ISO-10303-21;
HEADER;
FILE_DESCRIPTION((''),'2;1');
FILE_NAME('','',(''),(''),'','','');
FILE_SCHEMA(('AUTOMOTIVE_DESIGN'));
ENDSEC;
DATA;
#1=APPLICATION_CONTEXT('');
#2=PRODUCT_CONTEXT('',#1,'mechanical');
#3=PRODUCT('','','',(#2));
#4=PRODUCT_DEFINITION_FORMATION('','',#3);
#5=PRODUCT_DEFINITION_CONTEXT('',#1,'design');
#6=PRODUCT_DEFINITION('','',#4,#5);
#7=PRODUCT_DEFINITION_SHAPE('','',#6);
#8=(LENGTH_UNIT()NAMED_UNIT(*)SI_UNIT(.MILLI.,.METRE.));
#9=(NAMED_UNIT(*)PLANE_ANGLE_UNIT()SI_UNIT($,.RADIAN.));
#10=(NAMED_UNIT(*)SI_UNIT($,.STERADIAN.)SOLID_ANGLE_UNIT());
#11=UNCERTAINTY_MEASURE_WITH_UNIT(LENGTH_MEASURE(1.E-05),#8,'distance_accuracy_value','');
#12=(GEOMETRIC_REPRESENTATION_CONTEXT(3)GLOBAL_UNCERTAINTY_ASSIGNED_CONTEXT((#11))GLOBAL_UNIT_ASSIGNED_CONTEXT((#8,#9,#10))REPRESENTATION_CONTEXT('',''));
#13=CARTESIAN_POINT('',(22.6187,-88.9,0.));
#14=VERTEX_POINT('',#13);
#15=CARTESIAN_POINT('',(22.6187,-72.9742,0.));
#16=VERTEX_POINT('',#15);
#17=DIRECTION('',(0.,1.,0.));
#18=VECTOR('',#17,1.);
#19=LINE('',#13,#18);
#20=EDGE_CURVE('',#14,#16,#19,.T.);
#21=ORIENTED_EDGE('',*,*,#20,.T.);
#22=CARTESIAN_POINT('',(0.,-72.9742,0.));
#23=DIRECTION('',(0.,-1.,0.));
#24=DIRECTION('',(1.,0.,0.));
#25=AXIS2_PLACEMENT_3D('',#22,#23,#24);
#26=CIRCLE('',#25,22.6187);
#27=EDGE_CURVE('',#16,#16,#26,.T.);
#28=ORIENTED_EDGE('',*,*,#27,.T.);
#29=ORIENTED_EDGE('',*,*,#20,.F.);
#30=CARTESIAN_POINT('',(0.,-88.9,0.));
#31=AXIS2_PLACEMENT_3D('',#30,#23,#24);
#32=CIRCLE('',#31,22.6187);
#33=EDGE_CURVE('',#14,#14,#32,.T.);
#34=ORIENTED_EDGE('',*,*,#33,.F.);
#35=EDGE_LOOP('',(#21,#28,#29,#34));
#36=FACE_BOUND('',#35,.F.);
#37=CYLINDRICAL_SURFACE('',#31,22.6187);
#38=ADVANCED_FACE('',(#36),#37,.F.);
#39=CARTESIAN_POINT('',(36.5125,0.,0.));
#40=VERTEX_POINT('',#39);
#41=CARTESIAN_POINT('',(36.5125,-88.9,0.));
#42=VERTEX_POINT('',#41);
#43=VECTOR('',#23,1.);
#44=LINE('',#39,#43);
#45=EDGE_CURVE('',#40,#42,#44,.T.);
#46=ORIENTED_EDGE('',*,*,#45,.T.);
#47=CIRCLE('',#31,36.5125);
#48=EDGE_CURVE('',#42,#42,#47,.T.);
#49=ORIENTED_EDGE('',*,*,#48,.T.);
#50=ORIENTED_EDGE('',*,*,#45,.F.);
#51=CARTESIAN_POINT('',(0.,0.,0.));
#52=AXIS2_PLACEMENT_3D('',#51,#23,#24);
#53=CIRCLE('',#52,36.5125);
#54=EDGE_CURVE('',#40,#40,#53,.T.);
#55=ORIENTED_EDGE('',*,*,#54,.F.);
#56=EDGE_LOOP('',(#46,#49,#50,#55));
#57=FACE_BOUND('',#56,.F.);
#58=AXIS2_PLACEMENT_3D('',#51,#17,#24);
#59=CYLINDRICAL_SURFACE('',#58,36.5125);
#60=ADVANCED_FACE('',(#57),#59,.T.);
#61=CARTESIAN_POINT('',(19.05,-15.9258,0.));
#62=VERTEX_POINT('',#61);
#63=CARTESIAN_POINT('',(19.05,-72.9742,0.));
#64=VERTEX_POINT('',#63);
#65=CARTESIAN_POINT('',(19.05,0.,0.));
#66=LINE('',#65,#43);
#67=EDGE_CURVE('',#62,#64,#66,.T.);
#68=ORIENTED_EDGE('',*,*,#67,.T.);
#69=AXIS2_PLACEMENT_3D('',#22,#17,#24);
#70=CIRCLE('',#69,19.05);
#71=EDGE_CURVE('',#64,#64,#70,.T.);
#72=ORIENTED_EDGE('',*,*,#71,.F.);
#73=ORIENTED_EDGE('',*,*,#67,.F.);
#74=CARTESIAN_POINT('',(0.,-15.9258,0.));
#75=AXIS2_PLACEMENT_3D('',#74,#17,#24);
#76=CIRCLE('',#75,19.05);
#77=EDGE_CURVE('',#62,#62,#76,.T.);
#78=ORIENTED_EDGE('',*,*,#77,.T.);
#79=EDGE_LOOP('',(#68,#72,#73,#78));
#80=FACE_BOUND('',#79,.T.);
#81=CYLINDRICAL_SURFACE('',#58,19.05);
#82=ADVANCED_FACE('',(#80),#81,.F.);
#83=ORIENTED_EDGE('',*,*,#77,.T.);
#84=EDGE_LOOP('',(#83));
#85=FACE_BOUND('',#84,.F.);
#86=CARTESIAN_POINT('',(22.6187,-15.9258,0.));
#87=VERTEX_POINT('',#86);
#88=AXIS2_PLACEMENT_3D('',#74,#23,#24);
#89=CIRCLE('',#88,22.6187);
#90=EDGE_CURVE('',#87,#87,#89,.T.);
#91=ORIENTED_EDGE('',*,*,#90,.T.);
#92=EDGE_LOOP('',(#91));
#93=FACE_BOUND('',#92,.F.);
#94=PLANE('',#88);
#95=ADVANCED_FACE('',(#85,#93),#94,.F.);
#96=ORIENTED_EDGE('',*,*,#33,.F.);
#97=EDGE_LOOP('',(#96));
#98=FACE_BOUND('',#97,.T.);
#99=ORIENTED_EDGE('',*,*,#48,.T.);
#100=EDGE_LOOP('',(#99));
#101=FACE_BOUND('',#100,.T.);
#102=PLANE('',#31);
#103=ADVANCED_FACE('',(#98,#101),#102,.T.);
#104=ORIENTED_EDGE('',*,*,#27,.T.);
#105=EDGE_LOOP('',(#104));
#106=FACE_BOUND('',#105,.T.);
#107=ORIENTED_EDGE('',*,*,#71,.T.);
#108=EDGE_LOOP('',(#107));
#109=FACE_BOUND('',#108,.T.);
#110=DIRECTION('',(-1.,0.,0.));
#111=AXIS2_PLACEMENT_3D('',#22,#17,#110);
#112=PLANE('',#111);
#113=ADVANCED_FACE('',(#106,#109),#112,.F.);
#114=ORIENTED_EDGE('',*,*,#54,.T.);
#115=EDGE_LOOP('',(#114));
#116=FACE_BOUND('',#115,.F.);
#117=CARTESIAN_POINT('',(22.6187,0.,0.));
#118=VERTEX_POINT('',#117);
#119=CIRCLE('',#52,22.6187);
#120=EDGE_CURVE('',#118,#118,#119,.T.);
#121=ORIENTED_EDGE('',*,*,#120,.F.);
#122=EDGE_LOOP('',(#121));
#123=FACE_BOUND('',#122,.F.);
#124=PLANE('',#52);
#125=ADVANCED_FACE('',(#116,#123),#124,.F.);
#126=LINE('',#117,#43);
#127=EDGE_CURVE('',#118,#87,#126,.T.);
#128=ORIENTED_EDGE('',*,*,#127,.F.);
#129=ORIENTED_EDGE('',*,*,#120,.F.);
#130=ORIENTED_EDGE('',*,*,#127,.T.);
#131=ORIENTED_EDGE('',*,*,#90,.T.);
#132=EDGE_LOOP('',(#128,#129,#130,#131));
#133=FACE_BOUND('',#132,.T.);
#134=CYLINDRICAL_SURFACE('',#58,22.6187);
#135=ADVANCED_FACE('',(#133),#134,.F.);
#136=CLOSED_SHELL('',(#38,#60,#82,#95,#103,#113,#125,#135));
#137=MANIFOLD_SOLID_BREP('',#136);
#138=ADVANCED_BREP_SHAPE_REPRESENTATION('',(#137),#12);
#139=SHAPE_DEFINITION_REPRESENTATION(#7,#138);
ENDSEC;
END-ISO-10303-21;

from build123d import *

# Parameters (mm, degrees)
F0_R     = 36.5125
F1_DEPTH = 88.9
F2_R     = 19.05
F3_DEPTH = 88.901
F4_R     = 22.6187
F5_DEPTH = 15.9258


# Not quite as in the source:
# - a pattern or mirror of a feature is missing from the dataset's text; its kind, count and spacing are read off the source's solid


with BuildPart() as f1:
    # F0 (on Front) → F1 (new body)
    with BuildSketch(Plane.XZ):
        Circle(F0_R)
    extrude(amount=F1_DEPTH)

    # F2 (on Front) → F3 (cut, through all)
    with BuildSketch(Plane.XZ):
        Circle(F2_R)
    extrude(amount=F3_DEPTH, mode=Mode.SUBTRACT)

    # F4 (on Front) → F5 (cut)
    with BuildSketch(Plane.XZ):
        Circle(F4_R)
    f5 = extrude(amount=F5_DEPTH, mode=Mode.SUBTRACT)

    # F5_copies: F5 across plane
    add(f5.mirror(Plane(origin=(0, -44.45, 0), x_dir=(0, 0, -1), z_dir=(0, -1, 0))), mode=Mode.SUBTRACT)


solid = f1.part
